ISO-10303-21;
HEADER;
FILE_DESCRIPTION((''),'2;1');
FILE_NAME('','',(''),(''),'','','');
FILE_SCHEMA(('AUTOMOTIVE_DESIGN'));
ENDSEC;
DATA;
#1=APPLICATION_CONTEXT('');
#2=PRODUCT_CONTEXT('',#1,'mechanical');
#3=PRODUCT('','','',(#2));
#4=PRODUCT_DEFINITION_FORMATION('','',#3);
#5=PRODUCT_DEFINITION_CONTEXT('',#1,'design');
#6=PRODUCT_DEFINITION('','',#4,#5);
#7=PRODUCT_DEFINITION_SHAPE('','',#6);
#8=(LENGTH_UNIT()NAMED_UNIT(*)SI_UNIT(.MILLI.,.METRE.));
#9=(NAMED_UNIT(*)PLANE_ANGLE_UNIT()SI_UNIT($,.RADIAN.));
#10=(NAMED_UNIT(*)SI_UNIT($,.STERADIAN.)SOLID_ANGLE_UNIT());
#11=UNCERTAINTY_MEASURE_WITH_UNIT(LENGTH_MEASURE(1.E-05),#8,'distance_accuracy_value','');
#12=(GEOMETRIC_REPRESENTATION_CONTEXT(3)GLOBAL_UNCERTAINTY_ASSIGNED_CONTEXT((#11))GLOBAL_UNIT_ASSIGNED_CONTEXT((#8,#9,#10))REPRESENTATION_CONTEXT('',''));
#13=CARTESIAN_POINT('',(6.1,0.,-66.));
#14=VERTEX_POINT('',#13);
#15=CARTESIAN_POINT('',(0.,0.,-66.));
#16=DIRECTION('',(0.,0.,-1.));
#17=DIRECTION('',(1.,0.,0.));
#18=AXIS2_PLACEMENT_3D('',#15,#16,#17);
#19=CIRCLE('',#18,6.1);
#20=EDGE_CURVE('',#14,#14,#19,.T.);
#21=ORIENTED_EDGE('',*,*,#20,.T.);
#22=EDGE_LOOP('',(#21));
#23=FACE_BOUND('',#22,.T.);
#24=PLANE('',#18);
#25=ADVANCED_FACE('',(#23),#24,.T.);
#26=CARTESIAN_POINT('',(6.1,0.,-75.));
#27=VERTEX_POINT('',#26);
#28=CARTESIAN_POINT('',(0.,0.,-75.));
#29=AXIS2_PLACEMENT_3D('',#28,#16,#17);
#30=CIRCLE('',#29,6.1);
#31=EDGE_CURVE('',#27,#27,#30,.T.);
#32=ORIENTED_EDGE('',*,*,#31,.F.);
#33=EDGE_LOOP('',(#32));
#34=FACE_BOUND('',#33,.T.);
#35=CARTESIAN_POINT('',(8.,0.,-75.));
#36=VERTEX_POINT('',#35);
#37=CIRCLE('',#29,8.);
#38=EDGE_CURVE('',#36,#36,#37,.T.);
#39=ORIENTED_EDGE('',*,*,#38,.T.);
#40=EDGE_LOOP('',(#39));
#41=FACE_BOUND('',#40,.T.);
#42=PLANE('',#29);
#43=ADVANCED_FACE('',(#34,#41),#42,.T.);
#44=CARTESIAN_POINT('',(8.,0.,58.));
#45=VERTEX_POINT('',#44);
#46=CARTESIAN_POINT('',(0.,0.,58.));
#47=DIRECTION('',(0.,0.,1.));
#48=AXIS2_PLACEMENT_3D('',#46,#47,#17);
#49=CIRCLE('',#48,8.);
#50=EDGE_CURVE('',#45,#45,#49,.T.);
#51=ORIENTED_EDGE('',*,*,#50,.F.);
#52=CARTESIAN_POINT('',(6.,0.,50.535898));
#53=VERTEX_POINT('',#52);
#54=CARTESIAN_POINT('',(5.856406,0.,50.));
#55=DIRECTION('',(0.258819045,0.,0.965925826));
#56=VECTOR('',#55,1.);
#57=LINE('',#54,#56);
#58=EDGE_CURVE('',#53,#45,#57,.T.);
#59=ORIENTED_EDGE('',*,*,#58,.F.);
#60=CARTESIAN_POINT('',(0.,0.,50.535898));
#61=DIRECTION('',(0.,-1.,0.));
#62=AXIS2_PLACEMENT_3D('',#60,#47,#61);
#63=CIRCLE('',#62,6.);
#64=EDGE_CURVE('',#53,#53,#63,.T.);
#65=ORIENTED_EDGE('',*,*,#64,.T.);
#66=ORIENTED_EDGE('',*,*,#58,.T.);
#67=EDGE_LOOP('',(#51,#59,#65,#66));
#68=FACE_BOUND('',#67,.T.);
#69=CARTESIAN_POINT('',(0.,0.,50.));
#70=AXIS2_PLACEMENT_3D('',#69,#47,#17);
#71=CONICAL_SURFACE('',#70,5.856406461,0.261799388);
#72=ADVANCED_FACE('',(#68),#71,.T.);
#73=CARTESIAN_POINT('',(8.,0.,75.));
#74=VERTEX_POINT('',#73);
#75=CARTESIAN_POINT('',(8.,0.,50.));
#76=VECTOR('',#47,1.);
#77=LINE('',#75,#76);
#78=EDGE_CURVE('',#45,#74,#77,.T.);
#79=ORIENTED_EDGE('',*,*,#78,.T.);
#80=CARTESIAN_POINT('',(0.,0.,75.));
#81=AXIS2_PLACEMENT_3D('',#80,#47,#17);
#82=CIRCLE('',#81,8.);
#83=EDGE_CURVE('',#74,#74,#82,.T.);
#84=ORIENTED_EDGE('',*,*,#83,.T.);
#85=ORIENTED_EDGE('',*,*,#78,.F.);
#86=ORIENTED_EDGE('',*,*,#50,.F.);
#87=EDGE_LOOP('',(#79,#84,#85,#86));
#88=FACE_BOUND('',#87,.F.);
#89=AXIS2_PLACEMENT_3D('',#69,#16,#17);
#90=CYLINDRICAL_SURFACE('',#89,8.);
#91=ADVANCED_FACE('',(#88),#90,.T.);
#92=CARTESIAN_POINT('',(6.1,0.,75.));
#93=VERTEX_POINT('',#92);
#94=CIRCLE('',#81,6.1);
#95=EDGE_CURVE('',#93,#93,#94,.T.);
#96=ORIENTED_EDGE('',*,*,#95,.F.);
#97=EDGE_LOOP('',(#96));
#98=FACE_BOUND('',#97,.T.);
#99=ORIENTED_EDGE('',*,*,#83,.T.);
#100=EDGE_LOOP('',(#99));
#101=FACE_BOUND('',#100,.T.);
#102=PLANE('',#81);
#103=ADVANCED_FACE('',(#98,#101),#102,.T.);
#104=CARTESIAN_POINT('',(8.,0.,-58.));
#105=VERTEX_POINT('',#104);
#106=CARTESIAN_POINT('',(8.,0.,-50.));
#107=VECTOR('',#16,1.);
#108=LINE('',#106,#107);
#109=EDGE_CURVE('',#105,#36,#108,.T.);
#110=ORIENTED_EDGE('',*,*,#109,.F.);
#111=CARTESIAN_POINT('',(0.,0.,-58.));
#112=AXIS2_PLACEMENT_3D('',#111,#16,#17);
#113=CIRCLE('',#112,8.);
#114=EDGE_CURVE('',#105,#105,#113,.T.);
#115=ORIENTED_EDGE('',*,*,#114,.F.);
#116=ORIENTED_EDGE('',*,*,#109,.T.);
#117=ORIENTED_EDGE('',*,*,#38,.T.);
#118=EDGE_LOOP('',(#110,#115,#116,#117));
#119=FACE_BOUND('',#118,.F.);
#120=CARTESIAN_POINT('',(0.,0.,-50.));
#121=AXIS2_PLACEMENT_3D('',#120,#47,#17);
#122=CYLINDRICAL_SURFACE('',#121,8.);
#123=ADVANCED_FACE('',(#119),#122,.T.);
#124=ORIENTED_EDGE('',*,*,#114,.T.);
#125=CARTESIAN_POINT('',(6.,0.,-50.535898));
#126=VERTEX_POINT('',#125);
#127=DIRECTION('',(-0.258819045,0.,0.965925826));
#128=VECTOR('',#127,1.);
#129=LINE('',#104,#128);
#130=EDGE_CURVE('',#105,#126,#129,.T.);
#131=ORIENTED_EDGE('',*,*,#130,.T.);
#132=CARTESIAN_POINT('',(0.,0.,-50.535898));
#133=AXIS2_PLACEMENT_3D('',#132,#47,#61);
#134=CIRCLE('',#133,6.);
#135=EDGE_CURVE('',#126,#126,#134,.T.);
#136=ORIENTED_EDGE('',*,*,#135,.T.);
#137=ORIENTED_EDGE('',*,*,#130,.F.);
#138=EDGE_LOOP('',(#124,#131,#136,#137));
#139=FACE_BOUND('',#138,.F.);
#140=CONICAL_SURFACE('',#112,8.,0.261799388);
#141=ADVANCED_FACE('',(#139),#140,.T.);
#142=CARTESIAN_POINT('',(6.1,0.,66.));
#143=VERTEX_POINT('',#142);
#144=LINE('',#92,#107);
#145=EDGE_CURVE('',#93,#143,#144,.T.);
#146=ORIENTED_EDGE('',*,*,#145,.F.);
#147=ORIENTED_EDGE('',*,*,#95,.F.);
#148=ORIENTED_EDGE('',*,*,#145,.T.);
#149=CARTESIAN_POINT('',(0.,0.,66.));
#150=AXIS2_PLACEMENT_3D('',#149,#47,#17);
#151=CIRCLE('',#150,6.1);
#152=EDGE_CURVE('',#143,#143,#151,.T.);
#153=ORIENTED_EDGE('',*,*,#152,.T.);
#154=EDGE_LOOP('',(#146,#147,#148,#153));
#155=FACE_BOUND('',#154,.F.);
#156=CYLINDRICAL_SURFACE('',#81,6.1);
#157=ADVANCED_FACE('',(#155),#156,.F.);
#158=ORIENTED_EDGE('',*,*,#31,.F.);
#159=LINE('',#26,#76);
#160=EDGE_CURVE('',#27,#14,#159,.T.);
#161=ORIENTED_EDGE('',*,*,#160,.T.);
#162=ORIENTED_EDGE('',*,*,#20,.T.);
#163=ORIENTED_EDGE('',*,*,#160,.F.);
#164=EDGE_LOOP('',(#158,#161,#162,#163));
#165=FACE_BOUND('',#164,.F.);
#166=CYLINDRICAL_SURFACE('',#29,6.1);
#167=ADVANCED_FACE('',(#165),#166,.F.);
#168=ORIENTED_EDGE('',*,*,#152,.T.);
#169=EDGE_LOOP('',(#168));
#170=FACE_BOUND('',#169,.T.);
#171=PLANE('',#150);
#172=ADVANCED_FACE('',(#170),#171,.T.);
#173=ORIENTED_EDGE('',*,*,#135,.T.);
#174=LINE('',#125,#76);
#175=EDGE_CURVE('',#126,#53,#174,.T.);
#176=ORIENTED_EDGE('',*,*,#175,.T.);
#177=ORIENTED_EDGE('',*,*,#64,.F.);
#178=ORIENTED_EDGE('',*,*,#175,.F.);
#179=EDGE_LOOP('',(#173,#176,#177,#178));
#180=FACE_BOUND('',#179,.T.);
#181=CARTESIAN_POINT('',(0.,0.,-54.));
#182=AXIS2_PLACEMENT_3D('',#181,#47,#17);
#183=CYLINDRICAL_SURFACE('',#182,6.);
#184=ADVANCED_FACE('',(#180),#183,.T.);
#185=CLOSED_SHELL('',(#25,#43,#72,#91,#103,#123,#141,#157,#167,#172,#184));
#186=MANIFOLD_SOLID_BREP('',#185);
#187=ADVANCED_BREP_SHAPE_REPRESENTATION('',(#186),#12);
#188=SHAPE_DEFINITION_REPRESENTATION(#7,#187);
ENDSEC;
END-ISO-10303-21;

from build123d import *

# Parameters (mm, degrees)
F0_R          = 6
F1_DEPTH      = 50
F1_DEPTH_BACK = 50
F2_R          = 8
F2_R_2        = 6
F4_DEPTH      = 25
F3_R          = 8
F3_R_2        = 6
F5_DEPTH      = 25
F6_S5_R       = 6
F6_T6_DEPTH   = 14
F6_S11_R      = 6
F6_T12_DEPTH  = 14
F7_R          = 6.1
F8_DEPTH      = 9
F9_R          = 6.1
F10_DEPTH     = 9


# Not quite as in the source:
# - a fillet or chamfer that OpenCascade refuses, or shapes differently, is made with other operations: its cross-section is extruded or revolved along the edge and cut away or added


with BuildPart() as f1:
    # F0 (on Top) → F1 (new body, two sides)
    with BuildSketch(Plane.XY) as f1_sk:
        Circle(F0_R)
    extrude(amount=F1_DEPTH)
    extrude(f1_sk.sketch, amount=-F1_DEPTH_BACK)

    # F2 (on face) → F4 (join)
    with BuildSketch(Plane.XY.offset(50)):
        Circle(F2_R)
        Circle(F2_R_2, mode=Mode.SUBTRACT)
        Circle(F2_R_2)
    extrude(amount=F4_DEPTH)

    # F3 (on face) → F5 (join)
    with BuildSketch(Plane(origin=(0, 0, -50), x_dir=(1, 0, 0), z_dir=(0, 0, -1))):
        Circle(F3_R)
        Circle(F3_R_2, mode=Mode.SUBTRACT)
        Circle(F3_R_2)
    extrude(amount=F5_DEPTH)

    # F6: chamfer of 8 x 2.1435935394 on 2 edges, made by hand


with BuildPart() as f6_tool2:
    # F6_s3 → F6_t4 (revolve)
    with BuildSketch(Plane.XZ):
        Polygon((8, -58), (5.8564064606, -50), (8, -50), align=None)
    revolve(axis=Axis((0, 0, -50), (0, 0, -1)))

    # F6_s5 → F6_t6 (cut, symmetric)
    with BuildSketch(Plane.XY.offset(-54)):
        Circle(F6_S5_R)
    extrude(amount=F6_T6_DEPTH, both=True, mode=Mode.SUBTRACT)


with BuildPart() as f1_1:
    add(f1.part)

    # F6_t1: cut F6_tool2
    add(f6_tool2.part, mode=Mode.SUBTRACT)


with BuildPart() as f6_tool8:
    # F6_s9 → F6_t10 (revolve)
    with BuildSketch(Plane.XZ):
        Polygon((5.8564064606, 50), (8, 58), (8, 50), align=None)
    revolve(axis=Axis((0, 0, 50), (0, 0, 1)))

    # F6_s11 → F6_t12 (cut, symmetric)
    with BuildSketch(Plane.XY.offset(54)):
        Circle(F6_S11_R)
    extrude(amount=F6_T12_DEPTH, both=True, mode=Mode.SUBTRACT)


with BuildPart() as f1_2:
    add(f1_1.part)

    # F6_t7: cut F6_tool8
    add(f6_tool8.part, mode=Mode.SUBTRACT)

    # F7 (on face) → F8 (cut)
    with BuildSketch(Plane(origin=(0, 0, -75), x_dir=(1, 0, 0), z_dir=(0, 0, -1))):
        Circle(F7_R)
    extrude(amount=-F8_DEPTH, mode=Mode.SUBTRACT)

    # F9 (on face) → F10 (cut)
    with BuildSketch(Plane.XY.offset(75)):
        Circle(F9_R)
    extrude(amount=-F10_DEPTH, mode=Mode.SUBTRACT)


solid = f1_2.part
